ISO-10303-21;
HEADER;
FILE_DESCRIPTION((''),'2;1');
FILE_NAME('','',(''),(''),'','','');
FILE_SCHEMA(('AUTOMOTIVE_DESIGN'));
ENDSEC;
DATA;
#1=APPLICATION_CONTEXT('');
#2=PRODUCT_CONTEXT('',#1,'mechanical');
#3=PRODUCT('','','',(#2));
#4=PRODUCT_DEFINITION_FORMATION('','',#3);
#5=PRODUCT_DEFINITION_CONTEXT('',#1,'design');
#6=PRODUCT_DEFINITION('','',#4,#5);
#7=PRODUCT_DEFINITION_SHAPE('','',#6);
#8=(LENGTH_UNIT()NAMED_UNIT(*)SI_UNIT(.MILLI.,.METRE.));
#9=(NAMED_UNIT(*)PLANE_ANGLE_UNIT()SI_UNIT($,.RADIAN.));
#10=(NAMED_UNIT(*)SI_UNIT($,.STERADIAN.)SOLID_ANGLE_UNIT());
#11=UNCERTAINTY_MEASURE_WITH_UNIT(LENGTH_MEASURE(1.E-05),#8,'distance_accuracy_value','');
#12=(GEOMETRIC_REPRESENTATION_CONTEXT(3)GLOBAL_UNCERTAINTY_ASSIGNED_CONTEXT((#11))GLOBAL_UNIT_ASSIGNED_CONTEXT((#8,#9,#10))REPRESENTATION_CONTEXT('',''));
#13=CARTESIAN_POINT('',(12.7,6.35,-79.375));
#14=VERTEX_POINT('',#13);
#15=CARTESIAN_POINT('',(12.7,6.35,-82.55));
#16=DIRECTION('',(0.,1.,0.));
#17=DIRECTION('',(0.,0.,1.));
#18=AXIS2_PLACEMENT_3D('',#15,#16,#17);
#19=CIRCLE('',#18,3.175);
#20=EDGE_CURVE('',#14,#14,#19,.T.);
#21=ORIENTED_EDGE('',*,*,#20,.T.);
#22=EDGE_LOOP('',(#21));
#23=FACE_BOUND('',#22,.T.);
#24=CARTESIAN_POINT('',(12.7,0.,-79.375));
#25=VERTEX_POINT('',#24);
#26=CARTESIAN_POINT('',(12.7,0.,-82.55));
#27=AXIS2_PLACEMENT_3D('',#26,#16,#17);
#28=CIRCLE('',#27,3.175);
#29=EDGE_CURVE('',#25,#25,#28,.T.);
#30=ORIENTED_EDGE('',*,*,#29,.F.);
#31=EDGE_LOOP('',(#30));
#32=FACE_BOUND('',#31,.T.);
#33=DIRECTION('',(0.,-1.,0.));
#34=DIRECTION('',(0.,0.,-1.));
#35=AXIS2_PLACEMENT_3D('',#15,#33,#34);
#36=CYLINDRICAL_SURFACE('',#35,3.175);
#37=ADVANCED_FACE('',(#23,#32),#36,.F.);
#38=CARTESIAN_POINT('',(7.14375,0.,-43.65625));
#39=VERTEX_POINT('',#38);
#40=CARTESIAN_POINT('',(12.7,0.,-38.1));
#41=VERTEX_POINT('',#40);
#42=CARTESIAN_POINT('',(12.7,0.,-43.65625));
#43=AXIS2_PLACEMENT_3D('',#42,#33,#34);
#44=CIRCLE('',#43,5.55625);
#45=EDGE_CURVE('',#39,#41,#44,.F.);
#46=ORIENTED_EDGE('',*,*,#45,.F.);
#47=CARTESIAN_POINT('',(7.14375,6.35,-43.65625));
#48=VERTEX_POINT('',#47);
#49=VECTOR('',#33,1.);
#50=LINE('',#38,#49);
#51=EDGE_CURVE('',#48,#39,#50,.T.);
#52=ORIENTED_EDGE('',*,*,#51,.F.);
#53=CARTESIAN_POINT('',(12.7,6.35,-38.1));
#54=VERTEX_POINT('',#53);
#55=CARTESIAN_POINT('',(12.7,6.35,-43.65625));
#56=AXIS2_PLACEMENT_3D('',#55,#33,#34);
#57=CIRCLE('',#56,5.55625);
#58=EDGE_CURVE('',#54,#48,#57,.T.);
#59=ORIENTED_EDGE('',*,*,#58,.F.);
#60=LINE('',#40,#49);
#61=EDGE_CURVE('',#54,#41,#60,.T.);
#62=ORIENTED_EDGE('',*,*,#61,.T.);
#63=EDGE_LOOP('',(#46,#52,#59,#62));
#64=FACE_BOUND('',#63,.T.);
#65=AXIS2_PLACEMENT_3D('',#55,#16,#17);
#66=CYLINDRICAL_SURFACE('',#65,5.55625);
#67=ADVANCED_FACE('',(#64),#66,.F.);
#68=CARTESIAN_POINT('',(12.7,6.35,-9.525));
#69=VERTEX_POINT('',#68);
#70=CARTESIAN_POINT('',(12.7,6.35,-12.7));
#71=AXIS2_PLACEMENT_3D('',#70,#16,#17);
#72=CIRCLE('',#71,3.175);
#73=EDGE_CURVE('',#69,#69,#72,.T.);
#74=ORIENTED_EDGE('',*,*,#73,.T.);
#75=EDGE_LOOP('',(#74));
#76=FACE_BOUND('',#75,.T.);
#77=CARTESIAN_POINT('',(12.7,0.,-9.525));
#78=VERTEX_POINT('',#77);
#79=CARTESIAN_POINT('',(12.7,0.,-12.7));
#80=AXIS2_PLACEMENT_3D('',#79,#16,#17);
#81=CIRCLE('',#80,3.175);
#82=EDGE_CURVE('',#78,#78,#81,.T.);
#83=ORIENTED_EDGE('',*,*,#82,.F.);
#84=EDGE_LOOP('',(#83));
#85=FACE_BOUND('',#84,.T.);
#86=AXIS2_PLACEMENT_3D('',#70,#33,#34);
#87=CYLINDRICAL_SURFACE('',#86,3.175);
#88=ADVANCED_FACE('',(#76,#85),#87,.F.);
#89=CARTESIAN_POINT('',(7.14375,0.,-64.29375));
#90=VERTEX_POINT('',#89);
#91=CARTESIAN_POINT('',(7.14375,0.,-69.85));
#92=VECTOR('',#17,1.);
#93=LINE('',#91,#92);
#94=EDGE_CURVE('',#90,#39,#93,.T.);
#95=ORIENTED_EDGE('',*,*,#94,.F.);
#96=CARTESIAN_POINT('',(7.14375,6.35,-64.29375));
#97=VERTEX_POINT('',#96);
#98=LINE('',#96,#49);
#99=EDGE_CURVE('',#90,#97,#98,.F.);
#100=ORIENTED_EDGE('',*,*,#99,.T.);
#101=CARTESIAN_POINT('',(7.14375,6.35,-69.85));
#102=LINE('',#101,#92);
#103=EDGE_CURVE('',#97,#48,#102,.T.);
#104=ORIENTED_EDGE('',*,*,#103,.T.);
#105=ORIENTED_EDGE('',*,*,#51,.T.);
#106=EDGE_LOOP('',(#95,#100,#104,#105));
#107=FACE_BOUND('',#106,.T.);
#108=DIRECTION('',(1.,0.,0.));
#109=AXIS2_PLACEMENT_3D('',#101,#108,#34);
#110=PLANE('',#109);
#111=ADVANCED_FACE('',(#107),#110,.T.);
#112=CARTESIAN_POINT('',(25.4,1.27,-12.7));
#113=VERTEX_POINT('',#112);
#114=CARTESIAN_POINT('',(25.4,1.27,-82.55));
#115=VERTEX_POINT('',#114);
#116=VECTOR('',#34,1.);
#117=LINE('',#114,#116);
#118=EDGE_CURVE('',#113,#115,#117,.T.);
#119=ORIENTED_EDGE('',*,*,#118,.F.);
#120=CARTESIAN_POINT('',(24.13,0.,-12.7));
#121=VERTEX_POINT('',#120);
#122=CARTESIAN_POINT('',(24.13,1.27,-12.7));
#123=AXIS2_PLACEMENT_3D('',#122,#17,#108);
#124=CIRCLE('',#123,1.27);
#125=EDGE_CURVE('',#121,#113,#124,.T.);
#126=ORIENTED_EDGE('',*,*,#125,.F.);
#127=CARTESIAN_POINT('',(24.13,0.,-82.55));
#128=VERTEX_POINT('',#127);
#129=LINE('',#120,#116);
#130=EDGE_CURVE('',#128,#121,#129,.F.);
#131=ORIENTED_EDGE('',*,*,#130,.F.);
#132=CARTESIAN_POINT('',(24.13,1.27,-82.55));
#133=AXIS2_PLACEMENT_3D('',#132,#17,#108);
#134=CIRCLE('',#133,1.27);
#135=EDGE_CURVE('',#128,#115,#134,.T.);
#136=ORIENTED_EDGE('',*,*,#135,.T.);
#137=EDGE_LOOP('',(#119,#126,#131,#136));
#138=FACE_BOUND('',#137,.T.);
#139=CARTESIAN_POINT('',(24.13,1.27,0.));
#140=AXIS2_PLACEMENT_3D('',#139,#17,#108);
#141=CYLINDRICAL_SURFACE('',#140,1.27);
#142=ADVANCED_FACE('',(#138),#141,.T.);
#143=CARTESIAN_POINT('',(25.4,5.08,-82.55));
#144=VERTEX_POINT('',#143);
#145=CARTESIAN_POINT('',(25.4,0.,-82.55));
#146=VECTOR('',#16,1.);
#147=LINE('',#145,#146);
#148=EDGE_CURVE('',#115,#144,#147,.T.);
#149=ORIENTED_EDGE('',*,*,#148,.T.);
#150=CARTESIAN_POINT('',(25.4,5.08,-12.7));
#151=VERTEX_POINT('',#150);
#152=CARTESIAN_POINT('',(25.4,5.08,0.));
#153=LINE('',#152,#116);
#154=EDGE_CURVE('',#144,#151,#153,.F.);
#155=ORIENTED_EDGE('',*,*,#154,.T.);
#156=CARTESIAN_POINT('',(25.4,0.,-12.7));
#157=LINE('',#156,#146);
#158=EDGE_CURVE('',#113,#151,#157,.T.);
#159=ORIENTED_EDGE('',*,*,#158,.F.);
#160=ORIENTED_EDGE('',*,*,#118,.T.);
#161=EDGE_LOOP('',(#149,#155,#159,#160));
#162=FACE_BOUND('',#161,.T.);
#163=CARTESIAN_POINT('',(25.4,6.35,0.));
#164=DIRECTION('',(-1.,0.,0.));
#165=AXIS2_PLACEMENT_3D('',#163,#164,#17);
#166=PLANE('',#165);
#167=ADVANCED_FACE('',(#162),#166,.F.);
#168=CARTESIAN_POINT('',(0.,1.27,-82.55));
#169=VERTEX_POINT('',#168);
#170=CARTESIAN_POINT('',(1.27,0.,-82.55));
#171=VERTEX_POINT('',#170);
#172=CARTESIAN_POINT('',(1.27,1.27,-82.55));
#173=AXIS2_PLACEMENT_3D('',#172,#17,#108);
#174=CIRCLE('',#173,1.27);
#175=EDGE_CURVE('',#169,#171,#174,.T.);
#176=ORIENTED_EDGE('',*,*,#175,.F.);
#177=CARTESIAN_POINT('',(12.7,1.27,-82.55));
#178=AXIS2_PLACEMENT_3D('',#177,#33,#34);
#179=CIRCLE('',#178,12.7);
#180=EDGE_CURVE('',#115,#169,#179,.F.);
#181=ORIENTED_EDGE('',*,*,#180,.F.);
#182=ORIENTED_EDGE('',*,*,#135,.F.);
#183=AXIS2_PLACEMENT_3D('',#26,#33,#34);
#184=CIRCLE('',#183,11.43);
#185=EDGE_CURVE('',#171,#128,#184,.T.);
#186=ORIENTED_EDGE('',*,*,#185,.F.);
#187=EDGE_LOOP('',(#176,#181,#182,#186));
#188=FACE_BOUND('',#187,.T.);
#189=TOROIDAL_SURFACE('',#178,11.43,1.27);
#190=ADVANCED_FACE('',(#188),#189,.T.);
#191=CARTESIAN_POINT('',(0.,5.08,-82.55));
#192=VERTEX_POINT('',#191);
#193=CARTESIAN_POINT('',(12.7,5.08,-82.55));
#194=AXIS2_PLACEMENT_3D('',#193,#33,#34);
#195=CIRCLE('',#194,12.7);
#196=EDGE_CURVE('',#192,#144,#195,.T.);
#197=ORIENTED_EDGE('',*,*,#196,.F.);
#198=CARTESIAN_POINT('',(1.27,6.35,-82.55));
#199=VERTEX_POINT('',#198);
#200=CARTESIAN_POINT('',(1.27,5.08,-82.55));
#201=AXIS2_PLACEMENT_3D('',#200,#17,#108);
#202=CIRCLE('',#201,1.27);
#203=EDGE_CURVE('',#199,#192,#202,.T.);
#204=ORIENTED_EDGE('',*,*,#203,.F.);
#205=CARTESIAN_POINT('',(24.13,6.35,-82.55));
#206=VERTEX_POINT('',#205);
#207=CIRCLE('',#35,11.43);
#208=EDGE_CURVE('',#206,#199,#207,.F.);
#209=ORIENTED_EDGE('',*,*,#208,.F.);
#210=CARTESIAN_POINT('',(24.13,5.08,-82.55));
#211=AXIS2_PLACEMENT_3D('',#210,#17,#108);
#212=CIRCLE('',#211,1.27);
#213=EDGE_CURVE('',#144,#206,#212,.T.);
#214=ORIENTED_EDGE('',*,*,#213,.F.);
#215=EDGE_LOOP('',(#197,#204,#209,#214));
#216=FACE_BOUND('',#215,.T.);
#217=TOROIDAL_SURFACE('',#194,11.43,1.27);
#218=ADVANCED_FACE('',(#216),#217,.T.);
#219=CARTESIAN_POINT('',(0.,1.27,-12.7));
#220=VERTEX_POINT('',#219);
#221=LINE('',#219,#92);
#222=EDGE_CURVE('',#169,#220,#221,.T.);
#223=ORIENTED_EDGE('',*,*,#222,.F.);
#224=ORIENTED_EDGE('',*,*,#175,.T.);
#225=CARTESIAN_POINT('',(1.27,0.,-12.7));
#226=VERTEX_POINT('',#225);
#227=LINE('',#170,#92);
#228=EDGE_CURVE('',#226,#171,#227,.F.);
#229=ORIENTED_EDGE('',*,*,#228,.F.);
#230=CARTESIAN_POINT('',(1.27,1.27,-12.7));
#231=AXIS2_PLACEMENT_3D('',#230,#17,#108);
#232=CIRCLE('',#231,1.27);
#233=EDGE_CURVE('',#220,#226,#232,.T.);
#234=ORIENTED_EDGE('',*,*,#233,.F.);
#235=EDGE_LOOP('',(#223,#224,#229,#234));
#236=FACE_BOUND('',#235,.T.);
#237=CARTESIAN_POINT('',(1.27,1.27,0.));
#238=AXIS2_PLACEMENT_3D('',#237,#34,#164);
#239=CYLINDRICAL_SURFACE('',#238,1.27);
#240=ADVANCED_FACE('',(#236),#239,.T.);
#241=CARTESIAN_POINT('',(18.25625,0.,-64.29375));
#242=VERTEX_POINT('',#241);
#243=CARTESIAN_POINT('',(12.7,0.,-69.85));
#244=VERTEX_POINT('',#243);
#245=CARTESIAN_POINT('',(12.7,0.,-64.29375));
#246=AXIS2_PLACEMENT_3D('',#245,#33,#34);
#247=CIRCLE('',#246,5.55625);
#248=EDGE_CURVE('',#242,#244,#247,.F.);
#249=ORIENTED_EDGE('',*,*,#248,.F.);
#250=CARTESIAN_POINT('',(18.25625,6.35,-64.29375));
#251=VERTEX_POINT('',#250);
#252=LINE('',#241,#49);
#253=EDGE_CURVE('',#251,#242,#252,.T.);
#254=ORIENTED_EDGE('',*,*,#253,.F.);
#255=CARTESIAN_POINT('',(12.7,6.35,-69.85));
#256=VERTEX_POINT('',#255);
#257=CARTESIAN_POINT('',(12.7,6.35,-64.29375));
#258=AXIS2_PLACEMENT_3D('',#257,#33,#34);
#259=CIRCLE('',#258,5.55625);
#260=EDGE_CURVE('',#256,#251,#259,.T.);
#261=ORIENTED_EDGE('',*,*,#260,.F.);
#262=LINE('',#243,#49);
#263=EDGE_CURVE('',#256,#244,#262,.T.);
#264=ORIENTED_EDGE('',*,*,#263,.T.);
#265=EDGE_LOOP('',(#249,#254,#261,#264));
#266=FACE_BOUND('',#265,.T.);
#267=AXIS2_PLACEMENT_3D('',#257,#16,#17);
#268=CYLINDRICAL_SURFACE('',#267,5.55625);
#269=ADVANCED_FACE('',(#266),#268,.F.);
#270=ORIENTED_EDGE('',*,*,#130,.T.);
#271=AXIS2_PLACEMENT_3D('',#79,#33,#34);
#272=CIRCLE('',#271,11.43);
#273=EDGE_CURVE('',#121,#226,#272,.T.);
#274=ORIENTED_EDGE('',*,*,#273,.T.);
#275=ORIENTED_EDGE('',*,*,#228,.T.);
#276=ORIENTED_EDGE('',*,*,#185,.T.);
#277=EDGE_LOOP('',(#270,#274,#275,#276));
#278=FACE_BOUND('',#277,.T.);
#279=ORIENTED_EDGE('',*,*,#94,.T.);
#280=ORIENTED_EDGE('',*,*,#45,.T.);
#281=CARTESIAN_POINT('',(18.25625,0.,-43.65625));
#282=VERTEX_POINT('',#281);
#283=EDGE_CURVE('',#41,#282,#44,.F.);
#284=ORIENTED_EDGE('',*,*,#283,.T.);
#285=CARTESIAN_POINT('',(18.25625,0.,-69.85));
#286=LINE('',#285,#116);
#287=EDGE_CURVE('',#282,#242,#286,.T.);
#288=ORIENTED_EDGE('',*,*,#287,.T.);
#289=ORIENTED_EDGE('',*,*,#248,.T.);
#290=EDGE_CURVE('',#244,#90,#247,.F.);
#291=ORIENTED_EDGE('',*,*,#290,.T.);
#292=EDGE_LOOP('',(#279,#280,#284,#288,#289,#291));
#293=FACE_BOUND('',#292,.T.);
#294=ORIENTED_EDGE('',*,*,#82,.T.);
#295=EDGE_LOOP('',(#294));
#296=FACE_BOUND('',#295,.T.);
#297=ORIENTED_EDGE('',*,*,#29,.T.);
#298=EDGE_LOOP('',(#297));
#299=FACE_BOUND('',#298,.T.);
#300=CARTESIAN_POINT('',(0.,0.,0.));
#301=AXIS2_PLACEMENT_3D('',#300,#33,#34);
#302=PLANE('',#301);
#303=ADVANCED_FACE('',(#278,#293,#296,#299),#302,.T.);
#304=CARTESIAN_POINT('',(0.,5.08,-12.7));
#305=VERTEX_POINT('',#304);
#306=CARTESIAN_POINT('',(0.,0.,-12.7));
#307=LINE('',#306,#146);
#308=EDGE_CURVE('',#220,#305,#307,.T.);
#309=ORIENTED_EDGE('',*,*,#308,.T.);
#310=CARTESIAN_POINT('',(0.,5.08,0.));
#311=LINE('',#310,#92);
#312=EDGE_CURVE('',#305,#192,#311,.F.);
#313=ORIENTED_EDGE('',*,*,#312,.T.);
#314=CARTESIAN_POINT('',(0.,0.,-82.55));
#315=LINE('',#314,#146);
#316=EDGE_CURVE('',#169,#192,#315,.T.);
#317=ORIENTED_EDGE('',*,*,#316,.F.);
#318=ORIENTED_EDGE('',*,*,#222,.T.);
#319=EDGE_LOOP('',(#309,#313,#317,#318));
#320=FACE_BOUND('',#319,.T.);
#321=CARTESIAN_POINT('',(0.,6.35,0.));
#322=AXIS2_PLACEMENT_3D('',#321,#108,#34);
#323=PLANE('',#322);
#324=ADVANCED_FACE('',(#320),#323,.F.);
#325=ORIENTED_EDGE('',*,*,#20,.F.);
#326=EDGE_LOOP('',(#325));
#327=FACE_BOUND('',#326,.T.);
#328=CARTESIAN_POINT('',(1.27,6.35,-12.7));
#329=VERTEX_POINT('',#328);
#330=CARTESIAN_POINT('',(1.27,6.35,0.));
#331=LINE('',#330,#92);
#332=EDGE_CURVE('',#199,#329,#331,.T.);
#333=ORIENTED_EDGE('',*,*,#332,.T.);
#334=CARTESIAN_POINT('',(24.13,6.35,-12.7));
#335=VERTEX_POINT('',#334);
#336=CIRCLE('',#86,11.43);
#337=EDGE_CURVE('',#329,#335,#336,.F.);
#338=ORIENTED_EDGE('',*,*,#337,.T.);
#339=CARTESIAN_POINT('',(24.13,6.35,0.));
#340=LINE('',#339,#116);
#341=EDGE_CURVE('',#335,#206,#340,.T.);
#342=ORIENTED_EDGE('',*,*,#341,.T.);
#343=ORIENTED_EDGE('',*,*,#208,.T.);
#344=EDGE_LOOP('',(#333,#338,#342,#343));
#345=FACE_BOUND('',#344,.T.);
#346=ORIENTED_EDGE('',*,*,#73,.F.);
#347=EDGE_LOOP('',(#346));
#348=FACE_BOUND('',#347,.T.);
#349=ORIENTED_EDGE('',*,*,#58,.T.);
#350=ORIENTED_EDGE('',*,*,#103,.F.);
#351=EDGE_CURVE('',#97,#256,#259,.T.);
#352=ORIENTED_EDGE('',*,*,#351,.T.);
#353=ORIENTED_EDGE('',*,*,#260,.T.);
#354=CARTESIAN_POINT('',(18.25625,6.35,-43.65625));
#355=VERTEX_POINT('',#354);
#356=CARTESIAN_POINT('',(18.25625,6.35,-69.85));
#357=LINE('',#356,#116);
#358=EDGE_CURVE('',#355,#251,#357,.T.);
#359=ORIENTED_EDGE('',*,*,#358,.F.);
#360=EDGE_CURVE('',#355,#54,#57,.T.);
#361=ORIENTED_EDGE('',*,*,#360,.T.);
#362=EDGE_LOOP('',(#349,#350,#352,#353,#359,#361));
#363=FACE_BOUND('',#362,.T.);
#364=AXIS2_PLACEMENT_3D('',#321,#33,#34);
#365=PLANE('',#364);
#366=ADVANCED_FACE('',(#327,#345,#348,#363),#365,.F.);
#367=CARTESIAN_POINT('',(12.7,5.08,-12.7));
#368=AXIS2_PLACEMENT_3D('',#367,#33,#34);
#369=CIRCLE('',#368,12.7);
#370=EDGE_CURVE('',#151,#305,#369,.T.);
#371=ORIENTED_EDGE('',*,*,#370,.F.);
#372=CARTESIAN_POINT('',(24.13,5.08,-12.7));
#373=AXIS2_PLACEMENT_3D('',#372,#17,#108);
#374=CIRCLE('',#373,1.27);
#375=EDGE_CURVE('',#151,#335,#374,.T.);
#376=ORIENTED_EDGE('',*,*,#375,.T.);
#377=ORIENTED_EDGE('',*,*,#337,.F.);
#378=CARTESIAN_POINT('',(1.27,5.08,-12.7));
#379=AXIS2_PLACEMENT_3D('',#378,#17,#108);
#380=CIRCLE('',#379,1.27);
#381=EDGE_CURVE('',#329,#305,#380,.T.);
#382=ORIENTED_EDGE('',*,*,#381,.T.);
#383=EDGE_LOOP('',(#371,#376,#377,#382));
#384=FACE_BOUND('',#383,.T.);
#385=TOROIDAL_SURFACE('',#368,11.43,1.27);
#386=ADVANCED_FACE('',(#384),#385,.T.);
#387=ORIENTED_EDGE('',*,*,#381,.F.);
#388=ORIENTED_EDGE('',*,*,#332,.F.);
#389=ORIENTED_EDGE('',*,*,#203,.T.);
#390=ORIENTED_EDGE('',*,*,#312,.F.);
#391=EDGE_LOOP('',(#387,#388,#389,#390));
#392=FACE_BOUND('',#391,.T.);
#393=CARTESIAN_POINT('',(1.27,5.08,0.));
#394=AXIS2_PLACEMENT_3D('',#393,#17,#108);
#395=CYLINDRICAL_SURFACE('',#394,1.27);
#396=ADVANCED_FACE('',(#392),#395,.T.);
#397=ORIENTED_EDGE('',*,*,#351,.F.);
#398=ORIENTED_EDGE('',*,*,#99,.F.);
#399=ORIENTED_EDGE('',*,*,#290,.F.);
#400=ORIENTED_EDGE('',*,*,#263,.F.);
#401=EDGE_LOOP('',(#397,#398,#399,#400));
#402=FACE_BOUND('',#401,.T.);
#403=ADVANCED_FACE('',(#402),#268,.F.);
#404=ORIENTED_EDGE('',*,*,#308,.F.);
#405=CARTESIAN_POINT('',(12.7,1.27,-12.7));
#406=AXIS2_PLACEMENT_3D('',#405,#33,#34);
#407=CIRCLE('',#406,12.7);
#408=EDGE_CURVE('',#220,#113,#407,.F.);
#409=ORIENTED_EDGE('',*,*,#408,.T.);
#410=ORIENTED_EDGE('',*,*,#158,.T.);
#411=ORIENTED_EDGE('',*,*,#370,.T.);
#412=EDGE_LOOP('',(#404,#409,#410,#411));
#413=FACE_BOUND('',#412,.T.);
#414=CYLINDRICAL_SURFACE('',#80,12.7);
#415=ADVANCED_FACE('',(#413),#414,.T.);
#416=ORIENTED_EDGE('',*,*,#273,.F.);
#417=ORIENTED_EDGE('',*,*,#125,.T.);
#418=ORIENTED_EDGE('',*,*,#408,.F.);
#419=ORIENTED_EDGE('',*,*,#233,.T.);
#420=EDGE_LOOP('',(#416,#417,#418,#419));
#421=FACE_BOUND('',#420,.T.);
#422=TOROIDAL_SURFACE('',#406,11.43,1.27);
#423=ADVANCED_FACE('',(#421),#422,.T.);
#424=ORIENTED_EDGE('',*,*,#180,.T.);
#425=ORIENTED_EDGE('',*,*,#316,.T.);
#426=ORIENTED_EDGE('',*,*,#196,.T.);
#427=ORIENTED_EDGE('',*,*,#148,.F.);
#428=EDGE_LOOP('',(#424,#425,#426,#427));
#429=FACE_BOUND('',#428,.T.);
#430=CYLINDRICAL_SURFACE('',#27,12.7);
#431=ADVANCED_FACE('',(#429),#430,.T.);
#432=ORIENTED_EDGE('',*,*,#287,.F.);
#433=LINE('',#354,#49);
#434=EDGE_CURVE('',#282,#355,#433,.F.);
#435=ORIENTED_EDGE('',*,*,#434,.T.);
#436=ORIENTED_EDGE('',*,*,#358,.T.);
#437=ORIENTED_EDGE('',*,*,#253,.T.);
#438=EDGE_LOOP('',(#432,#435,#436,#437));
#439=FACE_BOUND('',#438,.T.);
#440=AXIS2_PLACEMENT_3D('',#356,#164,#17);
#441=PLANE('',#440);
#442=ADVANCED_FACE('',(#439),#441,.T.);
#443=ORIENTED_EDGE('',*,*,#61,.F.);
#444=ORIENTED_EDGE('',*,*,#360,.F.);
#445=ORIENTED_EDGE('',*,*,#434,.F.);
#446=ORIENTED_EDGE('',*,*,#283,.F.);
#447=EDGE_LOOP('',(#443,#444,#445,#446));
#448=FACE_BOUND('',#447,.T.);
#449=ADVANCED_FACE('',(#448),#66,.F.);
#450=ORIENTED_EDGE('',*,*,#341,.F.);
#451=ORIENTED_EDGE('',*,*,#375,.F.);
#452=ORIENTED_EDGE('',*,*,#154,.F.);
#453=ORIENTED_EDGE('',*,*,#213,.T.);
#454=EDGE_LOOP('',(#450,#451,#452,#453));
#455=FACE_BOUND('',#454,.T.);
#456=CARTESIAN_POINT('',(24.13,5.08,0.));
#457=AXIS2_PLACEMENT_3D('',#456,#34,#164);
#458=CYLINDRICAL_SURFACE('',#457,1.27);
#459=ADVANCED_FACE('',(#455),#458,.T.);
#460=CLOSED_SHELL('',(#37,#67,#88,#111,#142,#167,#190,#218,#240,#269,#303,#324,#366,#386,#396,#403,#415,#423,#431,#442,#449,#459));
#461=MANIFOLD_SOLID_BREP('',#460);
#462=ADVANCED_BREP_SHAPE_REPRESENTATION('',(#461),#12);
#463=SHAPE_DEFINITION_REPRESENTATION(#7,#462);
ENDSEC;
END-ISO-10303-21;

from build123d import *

# Parameters (mm, degrees)
SKETCH1_W           = 25.4
SKETCH1_H           = 95.25
SKETCH1_R           = 3.175
SKETCH1_W_2         = 11.1125
SKETCH1_H_2         = 31.75
BOSS_EXTRUDE1_DEPTH = 6.35
CUT_EXTRUDE1_DEPTH  = 99.782817332
FILLET1_R           = 1.27
FILLET2_R           = 5.55625


with BuildPart() as part:
    # Sketch1 → Boss-Extrude1 (new body)
    with BuildSketch(Plane(origin=(0, 0, 0), x_dir=(1, 0, 0), z_dir=(0, 1, 0))):
        with Locations((12.7, 47.625)):
            Rectangle(SKETCH1_W, SKETCH1_H)
        with Locations(Location((12.7, 82.55, 0), (0, 0, 270))):
            Circle(SKETCH1_R, mode=Mode.SUBTRACT)
        with Locations(Location((12.7, 12.7, 0), (0, 0, 270))):
            Circle(SKETCH1_R, mode=Mode.SUBTRACT)
        with Locations((12.7, 53.975)):
            Rectangle(SKETCH1_W_2, SKETCH1_H_2, mode=Mode.SUBTRACT)
    extrude(amount=BOSS_EXTRUDE1_DEPTH)

    # Sketch2 → Cut-Extrude1 (cut, through all)
    with BuildSketch(Plane(origin=(0, 6.35, 0), x_dir=(1, 0, 0), z_dir=(0, 1, 0))):
        with BuildLine():
            ThreePointArc((0, 82.549999981), (3.719743872, 91.530256114), (12.7, 95.25))
            Line((12.7, 95.25), (0, 95.25))
            Line((0, 95.25), (0, 82.549999981))
        make_face()
        with BuildLine():
            ThreePointArc((12.7, 95.25), (21.680256121, 91.530256121), (25.4, 82.55))
            Line((25.4, 82.55), (25.4, 95.25))
            Line((25.4, 95.25), (12.7, 95.25))
        make_face()
        with BuildLine():
            ThreePointArc((12.7, 0), (3.719743903, 3.719743855), (0, 12.699999932))
            Line((0, 12.699999932), (0, 0))
            Line((0, 0), (12.7, 0))
        make_face()
        with BuildLine():
            Line((25.4, 0), (25.4, 12.7))
            ThreePointArc((25.4, 12.7), (21.680256121, 3.719743879), (12.7, 0))
            Line((12.7, 0), (25.4, 0))
        make_face()
    extrude(amount=-CUT_EXTRUDE1_DEPTH, mode=Mode.SUBTRACT)

    # Fillet1
    fillet1_edges = [part.edges().sort_by_distance(p)[0] for p in [
        (25.4, 0, -47.625),
        (25.4, 6.35, -47.625),
        (0, 0, -47.624999957),
        (0, 6.35, -47.624999957),
        (12.69999999, 6.35, -95.25),
        (12.69999999, 0, -95.25),
        (12.700000034, 6.35, 0),
        (12.700000034, 0, 0),
    ]]
    fillet(fillet1_edges, radius=FILLET1_R)

    # Fillet2
    fillet2_edges = [part.edges().sort_by_distance(p)[0] for p in [
        (7.14375, 3.175, -38.1),
        (18.25625, 3.175, -38.1),
        (18.25625, 3.175, -69.85),
        (7.14375, 3.175, -69.85),
    ]]
    fillet(fillet2_edges, radius=FILLET2_R - 0.0001)  # a hair under: the kernel refuses the full size


solid = part.part
